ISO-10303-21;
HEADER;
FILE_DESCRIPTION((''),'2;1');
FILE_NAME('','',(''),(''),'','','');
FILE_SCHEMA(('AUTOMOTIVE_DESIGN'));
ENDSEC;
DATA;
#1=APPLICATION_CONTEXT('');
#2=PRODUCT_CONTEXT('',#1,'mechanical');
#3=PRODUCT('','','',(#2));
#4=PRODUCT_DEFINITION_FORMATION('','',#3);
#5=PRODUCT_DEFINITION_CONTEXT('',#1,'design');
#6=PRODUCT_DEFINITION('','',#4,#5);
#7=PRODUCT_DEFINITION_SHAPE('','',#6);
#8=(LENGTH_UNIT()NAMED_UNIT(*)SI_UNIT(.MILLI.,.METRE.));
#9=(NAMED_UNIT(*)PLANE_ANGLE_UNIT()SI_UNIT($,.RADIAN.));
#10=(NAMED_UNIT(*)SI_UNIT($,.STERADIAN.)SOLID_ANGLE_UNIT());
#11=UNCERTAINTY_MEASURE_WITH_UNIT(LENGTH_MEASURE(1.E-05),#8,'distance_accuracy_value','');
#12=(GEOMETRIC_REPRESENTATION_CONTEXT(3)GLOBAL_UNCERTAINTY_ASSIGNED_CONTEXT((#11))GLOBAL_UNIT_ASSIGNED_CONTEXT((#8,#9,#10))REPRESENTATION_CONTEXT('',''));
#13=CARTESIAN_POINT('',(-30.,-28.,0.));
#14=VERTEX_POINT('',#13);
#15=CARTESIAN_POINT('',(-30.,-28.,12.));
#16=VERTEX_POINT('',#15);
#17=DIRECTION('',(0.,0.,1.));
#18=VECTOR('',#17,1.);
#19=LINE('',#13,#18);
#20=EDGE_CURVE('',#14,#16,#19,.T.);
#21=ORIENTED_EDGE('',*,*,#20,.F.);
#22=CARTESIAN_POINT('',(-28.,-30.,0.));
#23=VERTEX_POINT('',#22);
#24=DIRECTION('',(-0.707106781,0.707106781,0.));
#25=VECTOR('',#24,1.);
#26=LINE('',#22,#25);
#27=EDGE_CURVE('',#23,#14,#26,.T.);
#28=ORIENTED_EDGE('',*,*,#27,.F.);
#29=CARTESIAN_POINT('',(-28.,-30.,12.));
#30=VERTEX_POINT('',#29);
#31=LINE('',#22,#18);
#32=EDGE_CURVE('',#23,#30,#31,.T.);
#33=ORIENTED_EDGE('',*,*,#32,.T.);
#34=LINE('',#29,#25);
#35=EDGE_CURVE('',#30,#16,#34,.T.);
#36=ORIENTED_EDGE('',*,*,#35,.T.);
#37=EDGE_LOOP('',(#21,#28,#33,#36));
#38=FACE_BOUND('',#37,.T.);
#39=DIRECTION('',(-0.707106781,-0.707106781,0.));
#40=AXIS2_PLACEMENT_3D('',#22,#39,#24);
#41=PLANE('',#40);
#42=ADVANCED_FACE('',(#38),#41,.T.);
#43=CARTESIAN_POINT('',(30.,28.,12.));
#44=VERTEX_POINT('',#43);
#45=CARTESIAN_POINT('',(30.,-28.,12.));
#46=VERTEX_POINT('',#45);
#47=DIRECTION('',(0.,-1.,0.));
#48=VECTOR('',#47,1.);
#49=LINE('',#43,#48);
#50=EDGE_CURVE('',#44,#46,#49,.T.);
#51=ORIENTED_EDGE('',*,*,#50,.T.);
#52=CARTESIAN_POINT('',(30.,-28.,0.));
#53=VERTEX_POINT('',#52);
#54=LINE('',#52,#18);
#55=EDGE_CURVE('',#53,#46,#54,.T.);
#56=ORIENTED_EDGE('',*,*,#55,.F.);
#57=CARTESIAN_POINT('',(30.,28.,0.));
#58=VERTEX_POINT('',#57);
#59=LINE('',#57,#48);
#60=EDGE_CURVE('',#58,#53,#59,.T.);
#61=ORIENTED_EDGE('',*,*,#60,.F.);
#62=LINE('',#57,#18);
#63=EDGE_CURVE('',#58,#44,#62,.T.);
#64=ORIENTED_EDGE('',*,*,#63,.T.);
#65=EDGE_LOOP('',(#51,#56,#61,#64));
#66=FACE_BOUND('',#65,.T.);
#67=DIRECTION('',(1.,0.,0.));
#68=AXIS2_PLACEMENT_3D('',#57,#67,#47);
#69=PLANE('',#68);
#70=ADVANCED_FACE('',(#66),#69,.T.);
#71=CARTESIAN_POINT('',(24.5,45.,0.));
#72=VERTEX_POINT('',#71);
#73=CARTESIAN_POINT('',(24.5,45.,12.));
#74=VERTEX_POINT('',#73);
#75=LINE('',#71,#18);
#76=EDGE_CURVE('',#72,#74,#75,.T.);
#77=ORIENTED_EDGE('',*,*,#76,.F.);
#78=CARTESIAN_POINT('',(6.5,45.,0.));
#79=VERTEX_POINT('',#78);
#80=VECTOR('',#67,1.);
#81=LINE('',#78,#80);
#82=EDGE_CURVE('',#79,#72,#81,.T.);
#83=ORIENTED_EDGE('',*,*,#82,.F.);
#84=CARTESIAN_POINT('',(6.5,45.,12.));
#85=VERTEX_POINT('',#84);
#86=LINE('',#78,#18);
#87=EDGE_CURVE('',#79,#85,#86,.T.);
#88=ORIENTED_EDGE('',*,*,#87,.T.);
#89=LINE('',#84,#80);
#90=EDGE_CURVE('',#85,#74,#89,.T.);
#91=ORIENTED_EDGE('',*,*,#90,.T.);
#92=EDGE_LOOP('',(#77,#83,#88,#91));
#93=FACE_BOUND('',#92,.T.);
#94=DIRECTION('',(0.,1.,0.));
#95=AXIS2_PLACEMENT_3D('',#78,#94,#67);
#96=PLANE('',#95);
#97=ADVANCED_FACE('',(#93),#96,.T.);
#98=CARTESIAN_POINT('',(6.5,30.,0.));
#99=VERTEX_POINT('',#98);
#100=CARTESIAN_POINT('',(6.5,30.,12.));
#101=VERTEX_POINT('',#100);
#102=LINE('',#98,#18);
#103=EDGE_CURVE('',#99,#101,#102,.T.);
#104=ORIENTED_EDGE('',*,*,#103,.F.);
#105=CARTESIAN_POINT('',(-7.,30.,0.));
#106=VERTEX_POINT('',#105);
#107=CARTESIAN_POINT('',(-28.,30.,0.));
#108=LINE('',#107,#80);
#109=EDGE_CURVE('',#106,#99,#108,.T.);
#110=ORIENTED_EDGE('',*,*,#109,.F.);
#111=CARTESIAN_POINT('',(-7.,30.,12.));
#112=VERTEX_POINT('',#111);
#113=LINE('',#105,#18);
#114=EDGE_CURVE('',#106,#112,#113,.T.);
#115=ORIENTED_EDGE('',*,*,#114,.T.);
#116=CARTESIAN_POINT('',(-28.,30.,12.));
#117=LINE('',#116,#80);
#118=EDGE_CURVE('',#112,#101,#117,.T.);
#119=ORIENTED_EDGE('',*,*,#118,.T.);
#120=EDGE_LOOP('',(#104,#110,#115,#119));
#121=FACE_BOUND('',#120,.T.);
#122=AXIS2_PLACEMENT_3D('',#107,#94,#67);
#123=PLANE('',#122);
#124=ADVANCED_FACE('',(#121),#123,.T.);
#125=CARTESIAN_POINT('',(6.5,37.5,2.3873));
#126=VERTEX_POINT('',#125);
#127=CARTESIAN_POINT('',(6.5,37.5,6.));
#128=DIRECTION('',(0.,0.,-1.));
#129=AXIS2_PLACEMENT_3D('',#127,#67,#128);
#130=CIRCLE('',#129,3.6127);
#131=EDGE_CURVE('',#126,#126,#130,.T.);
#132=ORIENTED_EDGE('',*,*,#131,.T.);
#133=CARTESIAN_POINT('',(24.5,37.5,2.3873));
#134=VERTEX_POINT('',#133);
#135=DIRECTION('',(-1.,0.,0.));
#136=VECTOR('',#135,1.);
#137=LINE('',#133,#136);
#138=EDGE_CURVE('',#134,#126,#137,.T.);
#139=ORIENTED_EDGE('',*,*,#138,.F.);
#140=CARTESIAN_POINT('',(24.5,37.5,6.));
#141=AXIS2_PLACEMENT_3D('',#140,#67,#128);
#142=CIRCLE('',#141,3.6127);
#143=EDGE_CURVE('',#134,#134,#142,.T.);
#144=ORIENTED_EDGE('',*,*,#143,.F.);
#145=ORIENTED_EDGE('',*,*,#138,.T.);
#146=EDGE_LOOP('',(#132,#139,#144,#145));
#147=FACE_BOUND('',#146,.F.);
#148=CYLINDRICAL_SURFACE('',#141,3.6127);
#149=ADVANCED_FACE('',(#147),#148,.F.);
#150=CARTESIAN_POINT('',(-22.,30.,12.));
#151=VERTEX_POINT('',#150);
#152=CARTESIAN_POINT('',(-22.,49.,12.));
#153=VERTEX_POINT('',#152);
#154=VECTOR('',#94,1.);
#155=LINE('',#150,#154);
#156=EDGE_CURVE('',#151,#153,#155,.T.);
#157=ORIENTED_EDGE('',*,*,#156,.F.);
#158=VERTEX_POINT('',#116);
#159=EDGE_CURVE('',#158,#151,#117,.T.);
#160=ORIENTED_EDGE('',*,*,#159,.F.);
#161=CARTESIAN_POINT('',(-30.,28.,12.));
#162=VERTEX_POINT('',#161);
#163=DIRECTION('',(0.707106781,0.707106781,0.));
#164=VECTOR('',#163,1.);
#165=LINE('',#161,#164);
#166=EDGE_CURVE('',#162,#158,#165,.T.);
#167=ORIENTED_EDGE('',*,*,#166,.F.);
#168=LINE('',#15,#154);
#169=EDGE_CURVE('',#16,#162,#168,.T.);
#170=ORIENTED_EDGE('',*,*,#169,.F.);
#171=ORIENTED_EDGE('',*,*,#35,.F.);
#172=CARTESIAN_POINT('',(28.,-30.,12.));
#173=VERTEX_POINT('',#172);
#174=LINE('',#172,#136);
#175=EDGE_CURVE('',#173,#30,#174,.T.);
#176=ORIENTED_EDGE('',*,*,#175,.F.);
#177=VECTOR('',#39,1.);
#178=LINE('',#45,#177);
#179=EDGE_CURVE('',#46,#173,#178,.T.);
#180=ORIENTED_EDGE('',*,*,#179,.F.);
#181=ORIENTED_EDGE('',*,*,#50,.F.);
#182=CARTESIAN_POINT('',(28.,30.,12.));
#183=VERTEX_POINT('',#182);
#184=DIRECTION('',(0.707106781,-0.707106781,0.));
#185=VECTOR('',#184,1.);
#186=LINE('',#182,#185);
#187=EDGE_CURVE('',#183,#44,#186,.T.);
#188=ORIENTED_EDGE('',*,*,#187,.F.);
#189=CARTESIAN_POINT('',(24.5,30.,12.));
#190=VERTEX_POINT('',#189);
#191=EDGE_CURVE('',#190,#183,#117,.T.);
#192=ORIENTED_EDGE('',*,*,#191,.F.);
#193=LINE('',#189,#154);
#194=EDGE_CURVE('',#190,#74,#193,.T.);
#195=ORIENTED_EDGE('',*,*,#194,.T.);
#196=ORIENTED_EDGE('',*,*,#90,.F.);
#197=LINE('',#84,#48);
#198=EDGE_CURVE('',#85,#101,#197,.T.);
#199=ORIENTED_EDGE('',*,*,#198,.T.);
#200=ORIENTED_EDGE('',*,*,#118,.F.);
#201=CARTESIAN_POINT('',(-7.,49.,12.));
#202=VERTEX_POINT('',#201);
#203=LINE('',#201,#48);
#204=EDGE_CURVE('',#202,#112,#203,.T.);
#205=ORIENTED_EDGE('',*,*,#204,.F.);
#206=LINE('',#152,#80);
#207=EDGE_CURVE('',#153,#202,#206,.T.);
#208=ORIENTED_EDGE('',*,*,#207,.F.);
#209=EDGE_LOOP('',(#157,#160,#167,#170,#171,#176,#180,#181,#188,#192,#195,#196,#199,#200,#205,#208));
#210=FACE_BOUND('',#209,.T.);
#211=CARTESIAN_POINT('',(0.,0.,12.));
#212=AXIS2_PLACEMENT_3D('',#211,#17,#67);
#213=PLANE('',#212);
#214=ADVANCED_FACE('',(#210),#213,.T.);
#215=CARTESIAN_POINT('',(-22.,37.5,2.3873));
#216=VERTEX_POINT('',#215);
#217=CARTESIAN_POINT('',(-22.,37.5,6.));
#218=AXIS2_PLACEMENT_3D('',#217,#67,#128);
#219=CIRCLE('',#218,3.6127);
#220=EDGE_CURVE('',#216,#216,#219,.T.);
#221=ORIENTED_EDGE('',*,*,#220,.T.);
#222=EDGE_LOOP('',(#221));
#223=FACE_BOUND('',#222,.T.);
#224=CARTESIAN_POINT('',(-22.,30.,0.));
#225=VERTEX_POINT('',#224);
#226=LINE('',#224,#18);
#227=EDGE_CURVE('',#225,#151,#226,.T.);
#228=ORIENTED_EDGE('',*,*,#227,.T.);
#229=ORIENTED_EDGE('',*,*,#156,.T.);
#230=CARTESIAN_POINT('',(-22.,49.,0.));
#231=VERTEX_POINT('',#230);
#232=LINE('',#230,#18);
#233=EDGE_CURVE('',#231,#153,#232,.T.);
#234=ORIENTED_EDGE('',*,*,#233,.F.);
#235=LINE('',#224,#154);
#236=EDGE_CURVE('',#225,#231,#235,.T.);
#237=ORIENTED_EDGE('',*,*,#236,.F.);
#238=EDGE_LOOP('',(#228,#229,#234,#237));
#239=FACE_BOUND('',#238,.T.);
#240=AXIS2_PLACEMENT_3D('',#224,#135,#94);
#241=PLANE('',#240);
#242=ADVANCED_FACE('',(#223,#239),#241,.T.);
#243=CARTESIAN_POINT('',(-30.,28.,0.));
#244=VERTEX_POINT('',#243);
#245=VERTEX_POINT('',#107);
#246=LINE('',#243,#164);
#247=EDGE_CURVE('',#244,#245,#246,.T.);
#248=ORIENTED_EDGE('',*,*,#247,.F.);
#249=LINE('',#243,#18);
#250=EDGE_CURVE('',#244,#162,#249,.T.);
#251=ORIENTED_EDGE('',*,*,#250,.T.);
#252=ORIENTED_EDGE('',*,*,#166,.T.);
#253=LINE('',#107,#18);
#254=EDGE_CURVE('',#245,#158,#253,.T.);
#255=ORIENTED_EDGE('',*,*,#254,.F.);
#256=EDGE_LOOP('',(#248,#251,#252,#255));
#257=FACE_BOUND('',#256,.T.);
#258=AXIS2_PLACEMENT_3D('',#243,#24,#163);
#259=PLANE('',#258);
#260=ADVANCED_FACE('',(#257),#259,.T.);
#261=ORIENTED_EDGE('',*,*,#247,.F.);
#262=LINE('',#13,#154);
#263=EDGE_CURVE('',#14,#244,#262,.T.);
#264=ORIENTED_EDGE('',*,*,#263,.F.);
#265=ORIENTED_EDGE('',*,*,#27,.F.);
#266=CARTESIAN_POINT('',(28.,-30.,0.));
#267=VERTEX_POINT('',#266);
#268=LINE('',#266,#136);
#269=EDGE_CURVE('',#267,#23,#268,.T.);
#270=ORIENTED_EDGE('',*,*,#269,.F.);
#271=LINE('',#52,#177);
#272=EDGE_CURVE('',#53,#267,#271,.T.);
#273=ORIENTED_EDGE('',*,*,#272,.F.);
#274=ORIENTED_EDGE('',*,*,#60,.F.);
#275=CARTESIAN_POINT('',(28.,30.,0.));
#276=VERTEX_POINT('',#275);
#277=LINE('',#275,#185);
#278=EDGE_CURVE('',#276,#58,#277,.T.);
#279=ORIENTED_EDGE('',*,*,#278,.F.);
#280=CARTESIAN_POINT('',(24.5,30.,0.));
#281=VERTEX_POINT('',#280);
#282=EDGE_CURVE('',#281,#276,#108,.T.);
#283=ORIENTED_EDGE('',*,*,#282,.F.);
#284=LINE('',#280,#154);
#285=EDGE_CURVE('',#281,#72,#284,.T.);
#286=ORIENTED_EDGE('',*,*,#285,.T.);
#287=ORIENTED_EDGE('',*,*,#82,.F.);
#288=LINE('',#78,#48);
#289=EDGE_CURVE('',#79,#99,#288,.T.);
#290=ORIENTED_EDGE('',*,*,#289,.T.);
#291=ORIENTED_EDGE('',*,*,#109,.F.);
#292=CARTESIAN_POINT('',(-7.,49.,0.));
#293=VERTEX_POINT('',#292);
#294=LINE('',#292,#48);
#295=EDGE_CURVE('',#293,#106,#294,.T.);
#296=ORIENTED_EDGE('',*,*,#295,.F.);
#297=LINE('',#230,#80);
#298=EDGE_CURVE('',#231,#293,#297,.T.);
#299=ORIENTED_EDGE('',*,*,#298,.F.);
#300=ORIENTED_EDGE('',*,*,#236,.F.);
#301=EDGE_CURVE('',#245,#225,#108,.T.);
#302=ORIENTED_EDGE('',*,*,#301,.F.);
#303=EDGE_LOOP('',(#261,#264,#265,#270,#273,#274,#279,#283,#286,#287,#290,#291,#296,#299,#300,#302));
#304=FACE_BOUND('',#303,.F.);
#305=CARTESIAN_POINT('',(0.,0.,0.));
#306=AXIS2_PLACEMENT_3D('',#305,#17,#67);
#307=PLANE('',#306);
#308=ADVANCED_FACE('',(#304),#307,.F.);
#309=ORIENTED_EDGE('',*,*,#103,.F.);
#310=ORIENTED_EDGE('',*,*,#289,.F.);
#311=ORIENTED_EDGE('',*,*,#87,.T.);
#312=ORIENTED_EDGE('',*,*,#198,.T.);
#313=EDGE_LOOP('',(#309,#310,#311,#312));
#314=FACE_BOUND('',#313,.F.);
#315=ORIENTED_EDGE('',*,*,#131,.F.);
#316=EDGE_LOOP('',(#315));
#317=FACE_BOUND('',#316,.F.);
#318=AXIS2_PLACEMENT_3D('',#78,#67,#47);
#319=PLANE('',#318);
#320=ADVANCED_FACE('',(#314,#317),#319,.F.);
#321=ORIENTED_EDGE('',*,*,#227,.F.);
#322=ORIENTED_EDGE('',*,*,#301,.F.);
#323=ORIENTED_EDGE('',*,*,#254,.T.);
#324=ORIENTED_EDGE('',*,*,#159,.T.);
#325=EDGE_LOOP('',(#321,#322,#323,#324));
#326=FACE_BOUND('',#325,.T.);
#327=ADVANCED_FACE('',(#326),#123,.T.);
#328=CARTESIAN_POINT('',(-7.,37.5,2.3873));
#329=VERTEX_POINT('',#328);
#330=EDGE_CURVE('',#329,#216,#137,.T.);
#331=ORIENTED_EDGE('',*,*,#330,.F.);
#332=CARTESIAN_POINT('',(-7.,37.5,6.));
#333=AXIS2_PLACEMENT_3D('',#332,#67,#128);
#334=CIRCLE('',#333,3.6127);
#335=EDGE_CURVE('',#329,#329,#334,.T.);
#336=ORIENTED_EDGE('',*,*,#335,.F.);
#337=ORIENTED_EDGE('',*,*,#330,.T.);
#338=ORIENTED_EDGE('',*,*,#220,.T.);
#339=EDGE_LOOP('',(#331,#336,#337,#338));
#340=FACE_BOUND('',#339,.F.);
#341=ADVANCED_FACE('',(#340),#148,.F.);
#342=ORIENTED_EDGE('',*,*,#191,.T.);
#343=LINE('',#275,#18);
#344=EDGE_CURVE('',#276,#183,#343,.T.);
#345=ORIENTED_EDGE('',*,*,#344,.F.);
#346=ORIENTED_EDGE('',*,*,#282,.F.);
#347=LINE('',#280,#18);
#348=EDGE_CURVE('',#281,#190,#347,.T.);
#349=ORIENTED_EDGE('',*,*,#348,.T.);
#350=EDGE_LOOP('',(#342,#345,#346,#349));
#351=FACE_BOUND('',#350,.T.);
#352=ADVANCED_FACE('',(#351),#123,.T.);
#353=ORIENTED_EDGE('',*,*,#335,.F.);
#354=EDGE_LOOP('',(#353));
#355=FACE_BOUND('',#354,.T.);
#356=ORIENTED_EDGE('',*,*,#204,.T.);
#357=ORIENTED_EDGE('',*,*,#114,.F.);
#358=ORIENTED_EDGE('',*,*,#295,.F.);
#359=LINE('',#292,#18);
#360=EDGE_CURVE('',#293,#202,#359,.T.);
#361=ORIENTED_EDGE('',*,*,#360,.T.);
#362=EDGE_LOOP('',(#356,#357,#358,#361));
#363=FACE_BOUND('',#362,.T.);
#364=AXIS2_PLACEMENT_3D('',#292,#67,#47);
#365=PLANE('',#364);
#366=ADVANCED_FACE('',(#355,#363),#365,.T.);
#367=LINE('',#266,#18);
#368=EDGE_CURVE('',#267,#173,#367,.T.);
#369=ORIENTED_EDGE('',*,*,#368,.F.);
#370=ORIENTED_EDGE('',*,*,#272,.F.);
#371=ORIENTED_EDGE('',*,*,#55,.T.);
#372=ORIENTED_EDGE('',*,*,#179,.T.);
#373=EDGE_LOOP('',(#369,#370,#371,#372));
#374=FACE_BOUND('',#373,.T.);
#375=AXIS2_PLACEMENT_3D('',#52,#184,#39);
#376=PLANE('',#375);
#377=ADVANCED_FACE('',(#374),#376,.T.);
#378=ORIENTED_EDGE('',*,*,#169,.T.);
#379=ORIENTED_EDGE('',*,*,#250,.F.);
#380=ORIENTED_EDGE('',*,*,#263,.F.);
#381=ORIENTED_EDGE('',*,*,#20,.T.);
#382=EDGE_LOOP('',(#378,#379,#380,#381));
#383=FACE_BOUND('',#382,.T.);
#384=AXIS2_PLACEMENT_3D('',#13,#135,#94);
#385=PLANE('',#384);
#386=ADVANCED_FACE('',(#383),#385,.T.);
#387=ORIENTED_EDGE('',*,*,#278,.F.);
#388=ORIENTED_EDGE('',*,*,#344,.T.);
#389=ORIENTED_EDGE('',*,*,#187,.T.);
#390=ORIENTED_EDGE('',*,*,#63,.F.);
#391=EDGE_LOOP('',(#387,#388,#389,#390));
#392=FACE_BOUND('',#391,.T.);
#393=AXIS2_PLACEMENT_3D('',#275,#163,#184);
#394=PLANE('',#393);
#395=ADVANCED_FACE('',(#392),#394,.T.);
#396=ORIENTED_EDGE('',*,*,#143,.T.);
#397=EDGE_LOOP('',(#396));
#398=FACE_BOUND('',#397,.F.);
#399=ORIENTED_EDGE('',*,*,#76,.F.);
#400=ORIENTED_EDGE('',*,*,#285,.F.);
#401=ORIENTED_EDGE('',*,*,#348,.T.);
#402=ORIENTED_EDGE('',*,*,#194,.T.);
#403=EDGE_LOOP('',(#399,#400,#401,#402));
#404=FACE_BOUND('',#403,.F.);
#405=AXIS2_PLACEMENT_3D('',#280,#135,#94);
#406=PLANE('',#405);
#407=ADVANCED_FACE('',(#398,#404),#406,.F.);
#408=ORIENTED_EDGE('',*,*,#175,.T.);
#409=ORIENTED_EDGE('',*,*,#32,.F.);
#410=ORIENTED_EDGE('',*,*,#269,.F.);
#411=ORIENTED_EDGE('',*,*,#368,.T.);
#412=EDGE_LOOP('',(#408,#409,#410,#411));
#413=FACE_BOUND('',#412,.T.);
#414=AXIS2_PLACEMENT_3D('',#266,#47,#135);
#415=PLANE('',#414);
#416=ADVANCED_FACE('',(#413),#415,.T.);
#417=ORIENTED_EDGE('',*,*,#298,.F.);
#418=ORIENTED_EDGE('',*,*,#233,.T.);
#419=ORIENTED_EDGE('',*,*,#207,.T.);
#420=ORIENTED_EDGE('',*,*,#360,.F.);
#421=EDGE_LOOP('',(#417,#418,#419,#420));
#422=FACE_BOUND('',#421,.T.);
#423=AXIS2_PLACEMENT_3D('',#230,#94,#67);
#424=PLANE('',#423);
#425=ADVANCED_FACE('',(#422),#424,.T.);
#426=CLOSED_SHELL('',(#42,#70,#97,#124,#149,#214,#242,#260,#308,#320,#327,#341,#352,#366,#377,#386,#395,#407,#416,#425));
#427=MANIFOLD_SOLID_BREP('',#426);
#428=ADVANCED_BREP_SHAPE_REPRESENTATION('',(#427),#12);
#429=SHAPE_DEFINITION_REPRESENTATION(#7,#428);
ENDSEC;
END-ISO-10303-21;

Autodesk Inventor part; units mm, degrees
ref_plane "YZ Plane" through (0, 0, 0) normal (1, 0, 0) x (0, 1, 0)
ref_plane "XZ Plane" through (0, 0, 0) normal (0, 1, 0) x (-1, 0, 0)
ref_plane "XY Plane" through (0, 0, 0) normal (0, 0, 1) x (1, 0, 0)
ref_plane "Work Plane1" through (0, 0, 0) normal (0, 0, 1) x (1, 0, 0)
sketch "Sketch1" plane through (0, 0, 0) normal (0, 0, 1) x (1, 0, 0)
  circle A0 centre (17.5, 17.5) radius 1.95 projected
  circle A1 centre (17.5, -17.5) radius 1.95 projected
  circle A2 centre (-17.5, -17.5) radius 1.95 projected
  circle A3 centre (-17.5, 17.5) radius 1.95 projected
  circle A4 centre (0, 0) radius 7.5 projected
  line L0 (-30, 28) -> (-28, 30) projected
  line L1 (-30, -28) -> (-30, 28) projected
  line L2 (-28, -30) -> (-30, -28) projected
  line L3 (28, -30) -> (-28, -30) projected
  line L4 (30, -28) -> (28, -30) projected
  line L5 (30, 28) -> (30, -28) projected
  line L6 (28, 30) -> (30, 28) projected
  line L7 (-28, 30) -> (28, 30) projected
extrude "Extrusion1" add sketch "Sketch1" along normal blind 12 contours A0 | A1 | A2 | A3 | A4 | L0 L7 L6 L5 L4 L3 L2 L1
sketch "Sketch2" plane through (0, 0, 12) normal (0, 0, 1) x (1, 0, 0)
  point P0 (0, 0)
sketch "Sketch5" plane through (0, 0, 0) normal (0, 0, -1) x (-1, 0, 0)
  line L0 (49, -22) -> (49, -7)
  line L1 (30, -28) -> (30, 28) projected
  line L2 (45, 6.5) -> (45, 24.5)
  line L3 (49, -7) -> (30, -7)
  line L4 (30, -7) -> (30, -22)
  line L5 (30, -22) -> (49, -22)
  line L6 (49, -22) -> (49, -7)
  line L7 (45, 6.5) -> (30, 6.5)
  line L8 (30, 6.5) -> (30, 24.5)
  line L9 (30, 24.5) -> (45, 24.5)
  line L10 (45, 24.5) -> (45, 6.5)
  line L11 (22, 49) -> (7, 49)
  line L12 (-6.5, 45) -> (-24.5, 45)
  line L13 (7, 49) -> (7, 30)
  line L14 (7, 30) -> (22, 30)
  line L15 (22, 30) -> (22, 49)
  line L16 (22, 49) -> (7, 49)
  line L17 (-6.5, 45) -> (-6.5, 30)
  line L18 (-6.5, 30) -> (-24.5, 30)
  line L19 (-24.5, 30) -> (-24.5, 45)
  line L20 (-24.5, 45) -> (-6.5, 45)
  point P0 (0, 0)
  point P1 (-28, 30)
  dimension "d12" = 90
extrude "Extrusion4" add sketch "Sketch5" against normal up to surface (12 mm away) contours L15 L14 L13 L11 | L17 L18 L19 L12
sketch "Sketch6" plane through (24.5, 30, 0) normal (1, 0, 0) x (0, 0, -1)
  line L0 (-12, 0) -> (-12, 15) projected
  line L1 (0, 0) -> (-12, 0) projected
  line L2 (0, 0) -> (0, 15) projected
  line L3 (0, 15) -> (-12, 15) projected
  circle A0 centre (-6, 7.5) radius 3.6127
  point P0 (0, -30)
extrude "Extrusion5" cut sketch "Sketch6" against normal through all contours A0
properties part number "00_XY_stage-CHUO_SEIKI_LD-647-R1-Middle"
